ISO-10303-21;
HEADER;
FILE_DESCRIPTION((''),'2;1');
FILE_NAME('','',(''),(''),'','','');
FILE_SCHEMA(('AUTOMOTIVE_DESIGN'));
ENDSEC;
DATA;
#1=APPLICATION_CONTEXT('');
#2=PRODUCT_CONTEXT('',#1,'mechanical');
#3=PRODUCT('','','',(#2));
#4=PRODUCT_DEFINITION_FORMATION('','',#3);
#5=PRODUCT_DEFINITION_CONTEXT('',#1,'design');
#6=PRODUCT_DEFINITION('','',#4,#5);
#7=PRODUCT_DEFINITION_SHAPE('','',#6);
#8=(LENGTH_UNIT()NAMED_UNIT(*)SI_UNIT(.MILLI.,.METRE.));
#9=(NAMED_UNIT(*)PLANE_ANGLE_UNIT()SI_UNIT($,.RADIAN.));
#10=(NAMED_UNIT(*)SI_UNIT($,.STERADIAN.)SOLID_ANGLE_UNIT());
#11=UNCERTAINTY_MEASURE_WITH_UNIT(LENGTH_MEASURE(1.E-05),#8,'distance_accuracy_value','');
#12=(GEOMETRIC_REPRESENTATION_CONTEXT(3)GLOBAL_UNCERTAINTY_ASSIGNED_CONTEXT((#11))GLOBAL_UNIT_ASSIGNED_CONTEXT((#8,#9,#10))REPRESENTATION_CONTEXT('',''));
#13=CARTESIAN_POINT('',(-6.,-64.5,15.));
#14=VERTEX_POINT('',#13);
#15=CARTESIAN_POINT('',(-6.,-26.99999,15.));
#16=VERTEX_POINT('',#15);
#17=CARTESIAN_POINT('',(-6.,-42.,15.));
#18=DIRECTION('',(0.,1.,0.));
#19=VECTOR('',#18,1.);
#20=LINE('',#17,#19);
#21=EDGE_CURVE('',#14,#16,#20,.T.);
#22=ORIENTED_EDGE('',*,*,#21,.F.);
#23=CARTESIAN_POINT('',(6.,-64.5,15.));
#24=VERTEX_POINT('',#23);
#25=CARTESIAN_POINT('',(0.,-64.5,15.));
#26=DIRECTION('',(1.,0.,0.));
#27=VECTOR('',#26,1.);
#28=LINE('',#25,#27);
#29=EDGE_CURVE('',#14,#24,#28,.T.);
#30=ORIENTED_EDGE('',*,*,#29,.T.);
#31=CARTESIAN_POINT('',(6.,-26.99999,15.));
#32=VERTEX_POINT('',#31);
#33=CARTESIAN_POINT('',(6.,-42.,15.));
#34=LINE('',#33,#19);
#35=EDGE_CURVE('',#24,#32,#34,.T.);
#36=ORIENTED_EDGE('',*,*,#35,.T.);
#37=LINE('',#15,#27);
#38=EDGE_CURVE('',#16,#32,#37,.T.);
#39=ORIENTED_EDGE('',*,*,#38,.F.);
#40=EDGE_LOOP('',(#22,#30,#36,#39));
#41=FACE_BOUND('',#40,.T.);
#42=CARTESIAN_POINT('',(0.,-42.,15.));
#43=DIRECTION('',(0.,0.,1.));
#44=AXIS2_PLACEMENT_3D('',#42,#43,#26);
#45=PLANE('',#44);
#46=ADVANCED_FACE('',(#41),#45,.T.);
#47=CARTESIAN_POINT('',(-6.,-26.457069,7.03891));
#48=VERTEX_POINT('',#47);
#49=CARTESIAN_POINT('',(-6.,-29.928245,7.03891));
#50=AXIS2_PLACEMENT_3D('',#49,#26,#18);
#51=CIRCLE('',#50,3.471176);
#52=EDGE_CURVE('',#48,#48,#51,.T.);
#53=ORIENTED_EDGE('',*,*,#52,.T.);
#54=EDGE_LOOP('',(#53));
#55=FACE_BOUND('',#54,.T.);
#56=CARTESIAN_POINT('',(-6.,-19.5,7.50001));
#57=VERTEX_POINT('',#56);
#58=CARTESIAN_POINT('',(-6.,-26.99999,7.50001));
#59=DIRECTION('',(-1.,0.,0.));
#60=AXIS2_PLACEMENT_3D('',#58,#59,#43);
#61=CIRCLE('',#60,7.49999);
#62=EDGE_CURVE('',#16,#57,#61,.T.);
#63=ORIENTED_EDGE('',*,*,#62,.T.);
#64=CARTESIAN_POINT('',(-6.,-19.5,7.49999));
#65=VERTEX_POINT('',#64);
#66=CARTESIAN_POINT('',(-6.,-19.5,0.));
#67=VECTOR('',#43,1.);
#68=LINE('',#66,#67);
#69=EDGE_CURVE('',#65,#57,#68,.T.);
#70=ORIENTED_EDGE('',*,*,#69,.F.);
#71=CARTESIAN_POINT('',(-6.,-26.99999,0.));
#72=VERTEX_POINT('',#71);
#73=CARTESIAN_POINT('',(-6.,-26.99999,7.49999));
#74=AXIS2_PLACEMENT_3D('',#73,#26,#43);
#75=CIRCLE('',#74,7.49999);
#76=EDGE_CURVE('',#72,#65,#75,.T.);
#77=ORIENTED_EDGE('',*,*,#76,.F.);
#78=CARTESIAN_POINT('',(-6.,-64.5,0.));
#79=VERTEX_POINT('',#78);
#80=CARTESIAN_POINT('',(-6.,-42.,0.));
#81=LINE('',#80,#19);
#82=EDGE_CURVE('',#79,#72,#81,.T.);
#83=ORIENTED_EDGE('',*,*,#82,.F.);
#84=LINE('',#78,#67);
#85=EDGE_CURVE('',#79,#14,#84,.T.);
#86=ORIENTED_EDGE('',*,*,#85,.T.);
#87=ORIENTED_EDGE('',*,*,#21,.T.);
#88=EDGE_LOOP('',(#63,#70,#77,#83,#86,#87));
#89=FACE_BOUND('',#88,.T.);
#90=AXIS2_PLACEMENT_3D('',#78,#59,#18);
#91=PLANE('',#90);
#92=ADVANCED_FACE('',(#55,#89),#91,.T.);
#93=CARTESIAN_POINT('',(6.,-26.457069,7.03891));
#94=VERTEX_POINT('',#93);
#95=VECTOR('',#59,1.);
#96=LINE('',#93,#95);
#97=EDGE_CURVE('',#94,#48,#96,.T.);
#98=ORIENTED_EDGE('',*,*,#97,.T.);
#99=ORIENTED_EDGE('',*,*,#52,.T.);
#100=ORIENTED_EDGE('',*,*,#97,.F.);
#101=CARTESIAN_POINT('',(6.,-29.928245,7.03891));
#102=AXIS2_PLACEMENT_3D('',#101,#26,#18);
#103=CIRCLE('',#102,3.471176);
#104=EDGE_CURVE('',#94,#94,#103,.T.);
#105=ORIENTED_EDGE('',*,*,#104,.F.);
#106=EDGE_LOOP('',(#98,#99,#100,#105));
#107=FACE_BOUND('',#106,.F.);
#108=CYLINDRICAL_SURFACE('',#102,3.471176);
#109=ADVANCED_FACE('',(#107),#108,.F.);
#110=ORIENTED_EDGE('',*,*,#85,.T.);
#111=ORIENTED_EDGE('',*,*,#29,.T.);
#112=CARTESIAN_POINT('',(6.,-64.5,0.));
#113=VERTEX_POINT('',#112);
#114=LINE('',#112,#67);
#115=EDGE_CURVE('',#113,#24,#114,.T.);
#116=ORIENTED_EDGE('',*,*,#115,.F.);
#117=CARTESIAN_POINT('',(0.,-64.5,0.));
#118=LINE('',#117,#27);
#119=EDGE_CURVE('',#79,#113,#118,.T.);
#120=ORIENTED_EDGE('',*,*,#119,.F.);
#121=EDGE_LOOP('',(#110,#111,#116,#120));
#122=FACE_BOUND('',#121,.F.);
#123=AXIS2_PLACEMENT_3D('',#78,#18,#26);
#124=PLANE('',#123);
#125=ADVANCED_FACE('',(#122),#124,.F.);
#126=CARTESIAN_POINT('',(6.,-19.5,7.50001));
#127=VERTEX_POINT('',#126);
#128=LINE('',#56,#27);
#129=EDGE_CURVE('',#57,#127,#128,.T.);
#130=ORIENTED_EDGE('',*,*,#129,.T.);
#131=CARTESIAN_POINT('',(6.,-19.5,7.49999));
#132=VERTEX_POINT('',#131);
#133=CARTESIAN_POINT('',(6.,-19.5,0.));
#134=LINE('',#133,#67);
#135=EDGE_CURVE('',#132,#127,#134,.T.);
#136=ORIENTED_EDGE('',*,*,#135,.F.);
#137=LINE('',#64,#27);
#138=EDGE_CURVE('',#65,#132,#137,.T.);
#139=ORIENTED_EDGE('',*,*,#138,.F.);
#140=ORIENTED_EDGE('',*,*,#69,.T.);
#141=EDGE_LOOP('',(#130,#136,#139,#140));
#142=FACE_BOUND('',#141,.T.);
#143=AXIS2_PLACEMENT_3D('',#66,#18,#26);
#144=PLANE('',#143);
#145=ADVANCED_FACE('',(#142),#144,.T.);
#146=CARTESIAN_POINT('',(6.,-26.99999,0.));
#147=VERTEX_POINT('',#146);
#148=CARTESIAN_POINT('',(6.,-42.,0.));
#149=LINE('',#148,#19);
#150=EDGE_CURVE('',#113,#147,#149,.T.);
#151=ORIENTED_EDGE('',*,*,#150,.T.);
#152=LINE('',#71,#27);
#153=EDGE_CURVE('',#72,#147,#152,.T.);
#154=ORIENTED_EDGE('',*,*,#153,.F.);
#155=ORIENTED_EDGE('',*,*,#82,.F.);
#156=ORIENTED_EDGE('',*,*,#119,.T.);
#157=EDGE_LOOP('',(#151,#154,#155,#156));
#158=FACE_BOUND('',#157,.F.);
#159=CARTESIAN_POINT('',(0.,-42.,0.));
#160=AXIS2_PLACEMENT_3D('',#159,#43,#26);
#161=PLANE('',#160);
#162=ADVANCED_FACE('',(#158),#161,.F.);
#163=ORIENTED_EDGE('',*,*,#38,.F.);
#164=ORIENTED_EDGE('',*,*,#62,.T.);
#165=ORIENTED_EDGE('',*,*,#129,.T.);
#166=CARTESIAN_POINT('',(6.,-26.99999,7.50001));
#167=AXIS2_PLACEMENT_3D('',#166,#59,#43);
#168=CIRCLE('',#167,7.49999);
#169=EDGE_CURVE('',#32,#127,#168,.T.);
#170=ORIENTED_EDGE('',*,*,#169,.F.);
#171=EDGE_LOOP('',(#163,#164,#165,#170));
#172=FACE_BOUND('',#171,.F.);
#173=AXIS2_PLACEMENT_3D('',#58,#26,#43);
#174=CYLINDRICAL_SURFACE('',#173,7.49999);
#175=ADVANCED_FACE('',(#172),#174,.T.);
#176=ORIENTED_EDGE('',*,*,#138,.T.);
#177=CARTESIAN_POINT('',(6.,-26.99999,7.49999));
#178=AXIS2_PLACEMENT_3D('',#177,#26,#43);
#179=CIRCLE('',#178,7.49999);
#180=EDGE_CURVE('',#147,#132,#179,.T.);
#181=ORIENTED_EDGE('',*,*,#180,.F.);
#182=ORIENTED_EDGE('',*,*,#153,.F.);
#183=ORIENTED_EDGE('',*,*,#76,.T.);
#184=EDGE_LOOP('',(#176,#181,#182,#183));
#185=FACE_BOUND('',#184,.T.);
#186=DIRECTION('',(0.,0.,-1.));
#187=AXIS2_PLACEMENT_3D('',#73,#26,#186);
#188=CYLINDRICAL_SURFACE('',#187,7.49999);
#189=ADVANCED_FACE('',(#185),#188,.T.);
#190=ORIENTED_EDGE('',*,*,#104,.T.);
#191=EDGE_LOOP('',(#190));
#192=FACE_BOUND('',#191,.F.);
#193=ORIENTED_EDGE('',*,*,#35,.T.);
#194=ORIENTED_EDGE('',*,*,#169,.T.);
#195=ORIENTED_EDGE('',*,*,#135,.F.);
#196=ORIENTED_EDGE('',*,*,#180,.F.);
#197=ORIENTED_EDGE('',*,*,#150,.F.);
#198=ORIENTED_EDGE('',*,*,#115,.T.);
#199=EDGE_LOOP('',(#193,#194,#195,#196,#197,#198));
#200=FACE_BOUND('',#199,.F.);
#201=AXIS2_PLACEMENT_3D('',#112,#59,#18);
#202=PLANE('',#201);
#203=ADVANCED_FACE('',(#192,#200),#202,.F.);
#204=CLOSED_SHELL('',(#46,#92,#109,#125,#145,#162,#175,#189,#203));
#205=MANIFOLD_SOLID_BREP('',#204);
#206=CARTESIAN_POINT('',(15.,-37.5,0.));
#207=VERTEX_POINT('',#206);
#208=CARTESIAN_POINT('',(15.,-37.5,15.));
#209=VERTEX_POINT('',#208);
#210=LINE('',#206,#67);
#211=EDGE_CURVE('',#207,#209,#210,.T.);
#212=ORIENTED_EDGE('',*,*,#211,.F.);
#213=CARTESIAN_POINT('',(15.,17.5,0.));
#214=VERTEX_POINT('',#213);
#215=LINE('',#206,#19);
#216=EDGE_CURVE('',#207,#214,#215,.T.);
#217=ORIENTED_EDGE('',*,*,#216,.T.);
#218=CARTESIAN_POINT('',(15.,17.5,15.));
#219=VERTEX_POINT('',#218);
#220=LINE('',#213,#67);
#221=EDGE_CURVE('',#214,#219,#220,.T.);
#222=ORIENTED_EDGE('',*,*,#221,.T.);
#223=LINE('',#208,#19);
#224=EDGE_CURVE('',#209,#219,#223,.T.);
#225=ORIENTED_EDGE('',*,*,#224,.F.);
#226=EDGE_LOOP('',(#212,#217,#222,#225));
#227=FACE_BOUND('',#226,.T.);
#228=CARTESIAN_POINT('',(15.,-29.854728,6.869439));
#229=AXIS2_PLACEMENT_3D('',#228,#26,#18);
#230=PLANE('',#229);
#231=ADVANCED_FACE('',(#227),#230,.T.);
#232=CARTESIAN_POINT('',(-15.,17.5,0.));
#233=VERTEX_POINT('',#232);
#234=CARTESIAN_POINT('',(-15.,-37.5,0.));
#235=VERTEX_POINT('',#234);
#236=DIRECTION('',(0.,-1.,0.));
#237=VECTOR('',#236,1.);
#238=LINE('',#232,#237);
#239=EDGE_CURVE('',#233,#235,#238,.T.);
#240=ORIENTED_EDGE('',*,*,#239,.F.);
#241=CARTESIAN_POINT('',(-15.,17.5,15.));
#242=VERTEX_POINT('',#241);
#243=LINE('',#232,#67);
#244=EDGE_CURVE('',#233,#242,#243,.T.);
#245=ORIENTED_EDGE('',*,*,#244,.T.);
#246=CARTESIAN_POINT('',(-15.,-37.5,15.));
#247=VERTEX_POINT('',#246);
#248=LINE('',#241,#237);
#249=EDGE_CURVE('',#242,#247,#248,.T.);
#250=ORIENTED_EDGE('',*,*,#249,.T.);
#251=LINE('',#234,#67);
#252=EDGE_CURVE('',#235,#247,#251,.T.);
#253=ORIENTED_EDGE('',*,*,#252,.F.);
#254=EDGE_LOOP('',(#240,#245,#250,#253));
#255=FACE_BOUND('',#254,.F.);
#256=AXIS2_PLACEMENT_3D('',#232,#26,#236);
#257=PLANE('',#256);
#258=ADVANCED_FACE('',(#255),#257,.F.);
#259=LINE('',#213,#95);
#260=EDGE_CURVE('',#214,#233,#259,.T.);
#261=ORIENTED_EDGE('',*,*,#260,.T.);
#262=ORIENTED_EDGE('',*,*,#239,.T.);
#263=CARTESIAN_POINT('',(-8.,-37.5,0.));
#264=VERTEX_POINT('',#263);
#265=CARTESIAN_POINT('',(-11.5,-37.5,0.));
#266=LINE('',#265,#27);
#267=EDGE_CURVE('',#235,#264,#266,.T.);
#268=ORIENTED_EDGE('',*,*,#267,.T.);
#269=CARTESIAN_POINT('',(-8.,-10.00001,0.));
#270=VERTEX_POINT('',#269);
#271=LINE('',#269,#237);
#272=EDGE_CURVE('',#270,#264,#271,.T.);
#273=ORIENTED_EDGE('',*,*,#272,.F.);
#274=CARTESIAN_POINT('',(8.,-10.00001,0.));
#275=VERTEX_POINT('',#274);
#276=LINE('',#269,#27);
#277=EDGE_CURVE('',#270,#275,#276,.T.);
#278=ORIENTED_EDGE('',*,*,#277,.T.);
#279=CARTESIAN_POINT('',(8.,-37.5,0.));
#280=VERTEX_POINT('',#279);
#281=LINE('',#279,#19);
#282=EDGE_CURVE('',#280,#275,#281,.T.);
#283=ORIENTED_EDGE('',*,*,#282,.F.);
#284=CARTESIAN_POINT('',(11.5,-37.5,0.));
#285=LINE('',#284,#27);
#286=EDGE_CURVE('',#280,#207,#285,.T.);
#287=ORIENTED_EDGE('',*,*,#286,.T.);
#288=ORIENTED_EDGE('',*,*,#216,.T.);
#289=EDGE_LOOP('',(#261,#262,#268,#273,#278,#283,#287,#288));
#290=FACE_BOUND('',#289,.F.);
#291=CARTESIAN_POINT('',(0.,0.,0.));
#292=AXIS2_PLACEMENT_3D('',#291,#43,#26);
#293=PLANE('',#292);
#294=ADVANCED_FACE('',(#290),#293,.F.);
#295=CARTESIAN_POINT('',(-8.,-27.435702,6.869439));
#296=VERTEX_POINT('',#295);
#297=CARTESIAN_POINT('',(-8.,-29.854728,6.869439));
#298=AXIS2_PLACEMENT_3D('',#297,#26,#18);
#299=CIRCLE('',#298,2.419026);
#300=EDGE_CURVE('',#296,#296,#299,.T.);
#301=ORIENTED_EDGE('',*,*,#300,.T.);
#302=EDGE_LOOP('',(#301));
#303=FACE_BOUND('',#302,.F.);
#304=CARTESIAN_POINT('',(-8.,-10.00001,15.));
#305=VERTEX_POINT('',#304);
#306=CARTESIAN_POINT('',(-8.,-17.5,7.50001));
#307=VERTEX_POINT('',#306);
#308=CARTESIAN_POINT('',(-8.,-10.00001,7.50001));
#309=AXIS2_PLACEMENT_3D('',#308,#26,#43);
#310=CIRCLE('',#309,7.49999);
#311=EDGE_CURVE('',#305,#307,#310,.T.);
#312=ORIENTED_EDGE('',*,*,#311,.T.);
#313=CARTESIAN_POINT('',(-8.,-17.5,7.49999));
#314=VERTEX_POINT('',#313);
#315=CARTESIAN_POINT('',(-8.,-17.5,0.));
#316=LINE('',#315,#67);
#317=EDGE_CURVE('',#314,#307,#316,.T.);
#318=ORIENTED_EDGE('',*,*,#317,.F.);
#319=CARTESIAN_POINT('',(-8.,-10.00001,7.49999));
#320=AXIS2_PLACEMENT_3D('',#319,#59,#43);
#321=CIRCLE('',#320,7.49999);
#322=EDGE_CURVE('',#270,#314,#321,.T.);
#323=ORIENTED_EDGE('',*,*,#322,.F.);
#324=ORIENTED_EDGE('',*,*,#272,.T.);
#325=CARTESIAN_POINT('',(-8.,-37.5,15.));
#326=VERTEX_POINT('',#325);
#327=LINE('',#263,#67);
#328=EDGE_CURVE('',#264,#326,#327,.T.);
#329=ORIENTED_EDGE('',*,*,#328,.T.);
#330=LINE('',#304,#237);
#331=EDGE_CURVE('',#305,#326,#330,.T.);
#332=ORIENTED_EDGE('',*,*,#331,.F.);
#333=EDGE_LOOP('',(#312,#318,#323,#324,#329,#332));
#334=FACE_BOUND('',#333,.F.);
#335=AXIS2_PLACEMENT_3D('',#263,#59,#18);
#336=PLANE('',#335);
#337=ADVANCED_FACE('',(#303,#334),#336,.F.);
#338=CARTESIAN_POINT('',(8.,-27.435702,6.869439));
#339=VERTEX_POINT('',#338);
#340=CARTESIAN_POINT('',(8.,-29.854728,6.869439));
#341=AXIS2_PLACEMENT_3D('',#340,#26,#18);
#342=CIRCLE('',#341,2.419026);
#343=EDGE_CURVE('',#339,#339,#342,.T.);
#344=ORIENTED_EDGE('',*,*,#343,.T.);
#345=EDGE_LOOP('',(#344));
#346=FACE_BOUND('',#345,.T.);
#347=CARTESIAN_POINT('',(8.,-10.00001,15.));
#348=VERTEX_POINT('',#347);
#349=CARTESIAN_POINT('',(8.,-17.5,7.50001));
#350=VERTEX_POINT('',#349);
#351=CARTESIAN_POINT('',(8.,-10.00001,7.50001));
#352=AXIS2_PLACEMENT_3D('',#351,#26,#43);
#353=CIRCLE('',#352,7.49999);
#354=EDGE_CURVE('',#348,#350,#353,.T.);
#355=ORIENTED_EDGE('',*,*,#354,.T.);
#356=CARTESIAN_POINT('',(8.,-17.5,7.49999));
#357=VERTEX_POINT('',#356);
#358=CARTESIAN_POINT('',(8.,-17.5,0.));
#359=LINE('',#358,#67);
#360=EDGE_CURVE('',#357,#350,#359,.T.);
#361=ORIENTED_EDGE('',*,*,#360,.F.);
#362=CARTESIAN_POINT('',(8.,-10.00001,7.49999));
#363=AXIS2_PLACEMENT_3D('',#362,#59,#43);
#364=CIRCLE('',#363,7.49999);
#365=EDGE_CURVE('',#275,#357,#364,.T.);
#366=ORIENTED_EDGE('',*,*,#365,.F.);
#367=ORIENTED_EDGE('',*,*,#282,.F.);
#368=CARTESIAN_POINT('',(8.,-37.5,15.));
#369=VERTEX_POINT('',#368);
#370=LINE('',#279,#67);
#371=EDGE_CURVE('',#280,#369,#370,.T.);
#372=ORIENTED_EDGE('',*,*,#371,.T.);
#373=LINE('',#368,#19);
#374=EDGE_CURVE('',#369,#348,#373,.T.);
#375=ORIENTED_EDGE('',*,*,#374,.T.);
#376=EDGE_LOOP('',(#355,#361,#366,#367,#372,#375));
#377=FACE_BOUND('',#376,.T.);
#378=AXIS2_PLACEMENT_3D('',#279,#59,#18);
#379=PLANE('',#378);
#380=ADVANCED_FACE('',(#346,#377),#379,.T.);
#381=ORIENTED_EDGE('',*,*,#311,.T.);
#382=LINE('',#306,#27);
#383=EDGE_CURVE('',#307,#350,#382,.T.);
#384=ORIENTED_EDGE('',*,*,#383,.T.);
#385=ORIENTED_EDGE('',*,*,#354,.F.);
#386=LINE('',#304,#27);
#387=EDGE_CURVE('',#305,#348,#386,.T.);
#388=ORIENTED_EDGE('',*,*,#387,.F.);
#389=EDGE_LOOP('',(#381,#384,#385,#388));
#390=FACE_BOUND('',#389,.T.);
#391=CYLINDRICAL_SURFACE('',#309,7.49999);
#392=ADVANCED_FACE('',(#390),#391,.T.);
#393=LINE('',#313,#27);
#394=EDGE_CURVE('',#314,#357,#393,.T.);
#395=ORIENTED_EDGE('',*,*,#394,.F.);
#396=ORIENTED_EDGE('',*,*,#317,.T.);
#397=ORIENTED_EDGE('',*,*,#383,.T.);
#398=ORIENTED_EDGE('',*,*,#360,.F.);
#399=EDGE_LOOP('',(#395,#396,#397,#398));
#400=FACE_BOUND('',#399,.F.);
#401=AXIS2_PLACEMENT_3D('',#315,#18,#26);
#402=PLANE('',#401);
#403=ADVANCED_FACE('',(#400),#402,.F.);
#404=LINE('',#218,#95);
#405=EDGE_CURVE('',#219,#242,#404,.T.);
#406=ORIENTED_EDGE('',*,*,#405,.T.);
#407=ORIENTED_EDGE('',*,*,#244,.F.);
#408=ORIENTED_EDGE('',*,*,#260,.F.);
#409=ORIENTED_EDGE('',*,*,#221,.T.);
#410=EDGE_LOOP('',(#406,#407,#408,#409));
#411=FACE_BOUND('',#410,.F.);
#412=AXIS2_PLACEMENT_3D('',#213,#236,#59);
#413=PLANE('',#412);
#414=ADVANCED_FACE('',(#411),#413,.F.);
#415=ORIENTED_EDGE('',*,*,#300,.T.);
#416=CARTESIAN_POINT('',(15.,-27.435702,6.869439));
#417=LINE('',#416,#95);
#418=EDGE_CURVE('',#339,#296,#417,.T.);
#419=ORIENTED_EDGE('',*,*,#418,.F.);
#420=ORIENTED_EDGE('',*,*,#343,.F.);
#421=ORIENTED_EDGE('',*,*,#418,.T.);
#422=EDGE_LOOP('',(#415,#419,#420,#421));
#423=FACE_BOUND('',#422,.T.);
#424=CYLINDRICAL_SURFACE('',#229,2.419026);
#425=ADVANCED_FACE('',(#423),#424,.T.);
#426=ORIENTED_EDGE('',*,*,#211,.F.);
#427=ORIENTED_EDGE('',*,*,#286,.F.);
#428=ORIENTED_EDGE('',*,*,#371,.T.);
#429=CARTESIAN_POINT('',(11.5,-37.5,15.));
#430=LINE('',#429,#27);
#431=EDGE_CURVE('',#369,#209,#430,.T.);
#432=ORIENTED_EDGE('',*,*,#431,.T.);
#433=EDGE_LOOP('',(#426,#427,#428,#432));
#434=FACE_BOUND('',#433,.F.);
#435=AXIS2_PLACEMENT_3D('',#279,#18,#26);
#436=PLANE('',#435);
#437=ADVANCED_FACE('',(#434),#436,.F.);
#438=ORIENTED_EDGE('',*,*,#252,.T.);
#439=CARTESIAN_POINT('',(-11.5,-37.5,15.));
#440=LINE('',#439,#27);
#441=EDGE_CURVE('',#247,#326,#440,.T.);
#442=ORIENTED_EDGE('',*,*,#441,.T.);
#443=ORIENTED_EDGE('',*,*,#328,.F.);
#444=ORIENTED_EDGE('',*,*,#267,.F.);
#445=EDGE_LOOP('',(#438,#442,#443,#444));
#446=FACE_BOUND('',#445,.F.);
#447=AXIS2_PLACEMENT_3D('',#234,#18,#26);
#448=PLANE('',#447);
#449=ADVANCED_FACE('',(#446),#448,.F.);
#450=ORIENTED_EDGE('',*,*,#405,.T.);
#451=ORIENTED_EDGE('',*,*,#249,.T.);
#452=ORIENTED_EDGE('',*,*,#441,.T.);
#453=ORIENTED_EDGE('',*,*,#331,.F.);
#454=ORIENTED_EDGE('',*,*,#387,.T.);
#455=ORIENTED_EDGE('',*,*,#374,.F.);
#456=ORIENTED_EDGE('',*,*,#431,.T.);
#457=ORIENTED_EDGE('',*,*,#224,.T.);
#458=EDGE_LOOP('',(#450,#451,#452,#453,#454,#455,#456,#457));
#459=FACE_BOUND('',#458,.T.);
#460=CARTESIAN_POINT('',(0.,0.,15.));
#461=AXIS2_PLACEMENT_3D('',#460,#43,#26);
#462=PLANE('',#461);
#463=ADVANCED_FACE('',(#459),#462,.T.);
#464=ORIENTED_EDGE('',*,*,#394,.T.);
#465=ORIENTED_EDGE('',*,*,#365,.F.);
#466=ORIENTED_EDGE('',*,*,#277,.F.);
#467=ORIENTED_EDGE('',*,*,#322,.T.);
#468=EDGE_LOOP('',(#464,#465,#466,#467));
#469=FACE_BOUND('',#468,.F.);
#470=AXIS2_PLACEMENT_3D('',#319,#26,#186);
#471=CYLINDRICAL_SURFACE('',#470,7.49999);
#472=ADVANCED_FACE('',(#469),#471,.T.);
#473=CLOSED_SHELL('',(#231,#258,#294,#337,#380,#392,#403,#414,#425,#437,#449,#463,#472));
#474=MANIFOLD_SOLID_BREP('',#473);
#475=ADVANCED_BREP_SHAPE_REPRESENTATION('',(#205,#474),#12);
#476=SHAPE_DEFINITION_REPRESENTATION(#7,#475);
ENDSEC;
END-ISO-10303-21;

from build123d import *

# Parameters (mm, degrees)
F0_W     = 7
F0_H     = 20
F1_DEPTH = 15
F2_W     = 12
F2_H     = 45
F3_DEPTH = 15
F4_R     = 3.4711759081
F5_DEPTH = 12
F6_R     = 2.4190256098
F7_DEPTH = 30
F8_R     = 7.49999
F8_2_R   = 7.49999


# Not quite as in the source:
# - a fillet or chamfer is up to 0.001 mm smaller than in the source, because OpenCascade refuses the exact size


with BuildPart() as f1:
    # F0 (on Top) → F1 (new body)
    with BuildSketch(Plane.XY):
        Polygon((15, 17.5), (-15, 17.5), (-15, -17.5), (-8, -17.5), (8, -17.5), (15, -17.5), align=None)
        with Locations((-11.5, -27.5)):
            Rectangle(F0_W, F0_H)
        with Locations((11.5, -27.5)):
            Rectangle(F0_W, F0_H)
    extrude(amount=F1_DEPTH)

    # F6 (on face) → F7 (join, through all)
    with BuildSketch(Plane.YZ.offset(15)):
        with Locations((-29.854727909, 6.86943857)):
            Circle(F6_R)
    extrude(amount=-F7_DEPTH)

    # F8 (radius 7.5 in the source; OpenCascade refuses exactly that, so slightly less here)
    f8_edges = [f1.edges().sort_by_distance(p)[0] for p in [
        (0, -17.5, 0),
        (0, -17.5, 15),
    ]]
    fillet(f8_edges, radius=F8_R)


with BuildPart() as f3:
    # F2 (on Top) → F3 (new body)
    with BuildSketch(Plane.XY):
        with Locations((0, -42)):
            Rectangle(F2_W, F2_H)
    extrude(amount=F3_DEPTH)

    # F4 (on face) → F5 (cut, through all)
    with BuildSketch(Plane.YZ.offset(6)):
        with Locations((-29.9282446504, 7.0389099419)):
            Circle(F4_R)
    extrude(amount=-F5_DEPTH, mode=Mode.SUBTRACT)

    # F8#2 (radius 7.5 in the source; OpenCascade refuses exactly that, so slightly less here)
    f8_2_edges = [f3.edges().sort_by_distance(p)[0] for p in [
        (0, -19.5, 0),
        (0, -19.5, 15),
    ]]
    fillet(f8_2_edges, radius=F8_2_R)


solid = Compound([f1.part, f3.part])
